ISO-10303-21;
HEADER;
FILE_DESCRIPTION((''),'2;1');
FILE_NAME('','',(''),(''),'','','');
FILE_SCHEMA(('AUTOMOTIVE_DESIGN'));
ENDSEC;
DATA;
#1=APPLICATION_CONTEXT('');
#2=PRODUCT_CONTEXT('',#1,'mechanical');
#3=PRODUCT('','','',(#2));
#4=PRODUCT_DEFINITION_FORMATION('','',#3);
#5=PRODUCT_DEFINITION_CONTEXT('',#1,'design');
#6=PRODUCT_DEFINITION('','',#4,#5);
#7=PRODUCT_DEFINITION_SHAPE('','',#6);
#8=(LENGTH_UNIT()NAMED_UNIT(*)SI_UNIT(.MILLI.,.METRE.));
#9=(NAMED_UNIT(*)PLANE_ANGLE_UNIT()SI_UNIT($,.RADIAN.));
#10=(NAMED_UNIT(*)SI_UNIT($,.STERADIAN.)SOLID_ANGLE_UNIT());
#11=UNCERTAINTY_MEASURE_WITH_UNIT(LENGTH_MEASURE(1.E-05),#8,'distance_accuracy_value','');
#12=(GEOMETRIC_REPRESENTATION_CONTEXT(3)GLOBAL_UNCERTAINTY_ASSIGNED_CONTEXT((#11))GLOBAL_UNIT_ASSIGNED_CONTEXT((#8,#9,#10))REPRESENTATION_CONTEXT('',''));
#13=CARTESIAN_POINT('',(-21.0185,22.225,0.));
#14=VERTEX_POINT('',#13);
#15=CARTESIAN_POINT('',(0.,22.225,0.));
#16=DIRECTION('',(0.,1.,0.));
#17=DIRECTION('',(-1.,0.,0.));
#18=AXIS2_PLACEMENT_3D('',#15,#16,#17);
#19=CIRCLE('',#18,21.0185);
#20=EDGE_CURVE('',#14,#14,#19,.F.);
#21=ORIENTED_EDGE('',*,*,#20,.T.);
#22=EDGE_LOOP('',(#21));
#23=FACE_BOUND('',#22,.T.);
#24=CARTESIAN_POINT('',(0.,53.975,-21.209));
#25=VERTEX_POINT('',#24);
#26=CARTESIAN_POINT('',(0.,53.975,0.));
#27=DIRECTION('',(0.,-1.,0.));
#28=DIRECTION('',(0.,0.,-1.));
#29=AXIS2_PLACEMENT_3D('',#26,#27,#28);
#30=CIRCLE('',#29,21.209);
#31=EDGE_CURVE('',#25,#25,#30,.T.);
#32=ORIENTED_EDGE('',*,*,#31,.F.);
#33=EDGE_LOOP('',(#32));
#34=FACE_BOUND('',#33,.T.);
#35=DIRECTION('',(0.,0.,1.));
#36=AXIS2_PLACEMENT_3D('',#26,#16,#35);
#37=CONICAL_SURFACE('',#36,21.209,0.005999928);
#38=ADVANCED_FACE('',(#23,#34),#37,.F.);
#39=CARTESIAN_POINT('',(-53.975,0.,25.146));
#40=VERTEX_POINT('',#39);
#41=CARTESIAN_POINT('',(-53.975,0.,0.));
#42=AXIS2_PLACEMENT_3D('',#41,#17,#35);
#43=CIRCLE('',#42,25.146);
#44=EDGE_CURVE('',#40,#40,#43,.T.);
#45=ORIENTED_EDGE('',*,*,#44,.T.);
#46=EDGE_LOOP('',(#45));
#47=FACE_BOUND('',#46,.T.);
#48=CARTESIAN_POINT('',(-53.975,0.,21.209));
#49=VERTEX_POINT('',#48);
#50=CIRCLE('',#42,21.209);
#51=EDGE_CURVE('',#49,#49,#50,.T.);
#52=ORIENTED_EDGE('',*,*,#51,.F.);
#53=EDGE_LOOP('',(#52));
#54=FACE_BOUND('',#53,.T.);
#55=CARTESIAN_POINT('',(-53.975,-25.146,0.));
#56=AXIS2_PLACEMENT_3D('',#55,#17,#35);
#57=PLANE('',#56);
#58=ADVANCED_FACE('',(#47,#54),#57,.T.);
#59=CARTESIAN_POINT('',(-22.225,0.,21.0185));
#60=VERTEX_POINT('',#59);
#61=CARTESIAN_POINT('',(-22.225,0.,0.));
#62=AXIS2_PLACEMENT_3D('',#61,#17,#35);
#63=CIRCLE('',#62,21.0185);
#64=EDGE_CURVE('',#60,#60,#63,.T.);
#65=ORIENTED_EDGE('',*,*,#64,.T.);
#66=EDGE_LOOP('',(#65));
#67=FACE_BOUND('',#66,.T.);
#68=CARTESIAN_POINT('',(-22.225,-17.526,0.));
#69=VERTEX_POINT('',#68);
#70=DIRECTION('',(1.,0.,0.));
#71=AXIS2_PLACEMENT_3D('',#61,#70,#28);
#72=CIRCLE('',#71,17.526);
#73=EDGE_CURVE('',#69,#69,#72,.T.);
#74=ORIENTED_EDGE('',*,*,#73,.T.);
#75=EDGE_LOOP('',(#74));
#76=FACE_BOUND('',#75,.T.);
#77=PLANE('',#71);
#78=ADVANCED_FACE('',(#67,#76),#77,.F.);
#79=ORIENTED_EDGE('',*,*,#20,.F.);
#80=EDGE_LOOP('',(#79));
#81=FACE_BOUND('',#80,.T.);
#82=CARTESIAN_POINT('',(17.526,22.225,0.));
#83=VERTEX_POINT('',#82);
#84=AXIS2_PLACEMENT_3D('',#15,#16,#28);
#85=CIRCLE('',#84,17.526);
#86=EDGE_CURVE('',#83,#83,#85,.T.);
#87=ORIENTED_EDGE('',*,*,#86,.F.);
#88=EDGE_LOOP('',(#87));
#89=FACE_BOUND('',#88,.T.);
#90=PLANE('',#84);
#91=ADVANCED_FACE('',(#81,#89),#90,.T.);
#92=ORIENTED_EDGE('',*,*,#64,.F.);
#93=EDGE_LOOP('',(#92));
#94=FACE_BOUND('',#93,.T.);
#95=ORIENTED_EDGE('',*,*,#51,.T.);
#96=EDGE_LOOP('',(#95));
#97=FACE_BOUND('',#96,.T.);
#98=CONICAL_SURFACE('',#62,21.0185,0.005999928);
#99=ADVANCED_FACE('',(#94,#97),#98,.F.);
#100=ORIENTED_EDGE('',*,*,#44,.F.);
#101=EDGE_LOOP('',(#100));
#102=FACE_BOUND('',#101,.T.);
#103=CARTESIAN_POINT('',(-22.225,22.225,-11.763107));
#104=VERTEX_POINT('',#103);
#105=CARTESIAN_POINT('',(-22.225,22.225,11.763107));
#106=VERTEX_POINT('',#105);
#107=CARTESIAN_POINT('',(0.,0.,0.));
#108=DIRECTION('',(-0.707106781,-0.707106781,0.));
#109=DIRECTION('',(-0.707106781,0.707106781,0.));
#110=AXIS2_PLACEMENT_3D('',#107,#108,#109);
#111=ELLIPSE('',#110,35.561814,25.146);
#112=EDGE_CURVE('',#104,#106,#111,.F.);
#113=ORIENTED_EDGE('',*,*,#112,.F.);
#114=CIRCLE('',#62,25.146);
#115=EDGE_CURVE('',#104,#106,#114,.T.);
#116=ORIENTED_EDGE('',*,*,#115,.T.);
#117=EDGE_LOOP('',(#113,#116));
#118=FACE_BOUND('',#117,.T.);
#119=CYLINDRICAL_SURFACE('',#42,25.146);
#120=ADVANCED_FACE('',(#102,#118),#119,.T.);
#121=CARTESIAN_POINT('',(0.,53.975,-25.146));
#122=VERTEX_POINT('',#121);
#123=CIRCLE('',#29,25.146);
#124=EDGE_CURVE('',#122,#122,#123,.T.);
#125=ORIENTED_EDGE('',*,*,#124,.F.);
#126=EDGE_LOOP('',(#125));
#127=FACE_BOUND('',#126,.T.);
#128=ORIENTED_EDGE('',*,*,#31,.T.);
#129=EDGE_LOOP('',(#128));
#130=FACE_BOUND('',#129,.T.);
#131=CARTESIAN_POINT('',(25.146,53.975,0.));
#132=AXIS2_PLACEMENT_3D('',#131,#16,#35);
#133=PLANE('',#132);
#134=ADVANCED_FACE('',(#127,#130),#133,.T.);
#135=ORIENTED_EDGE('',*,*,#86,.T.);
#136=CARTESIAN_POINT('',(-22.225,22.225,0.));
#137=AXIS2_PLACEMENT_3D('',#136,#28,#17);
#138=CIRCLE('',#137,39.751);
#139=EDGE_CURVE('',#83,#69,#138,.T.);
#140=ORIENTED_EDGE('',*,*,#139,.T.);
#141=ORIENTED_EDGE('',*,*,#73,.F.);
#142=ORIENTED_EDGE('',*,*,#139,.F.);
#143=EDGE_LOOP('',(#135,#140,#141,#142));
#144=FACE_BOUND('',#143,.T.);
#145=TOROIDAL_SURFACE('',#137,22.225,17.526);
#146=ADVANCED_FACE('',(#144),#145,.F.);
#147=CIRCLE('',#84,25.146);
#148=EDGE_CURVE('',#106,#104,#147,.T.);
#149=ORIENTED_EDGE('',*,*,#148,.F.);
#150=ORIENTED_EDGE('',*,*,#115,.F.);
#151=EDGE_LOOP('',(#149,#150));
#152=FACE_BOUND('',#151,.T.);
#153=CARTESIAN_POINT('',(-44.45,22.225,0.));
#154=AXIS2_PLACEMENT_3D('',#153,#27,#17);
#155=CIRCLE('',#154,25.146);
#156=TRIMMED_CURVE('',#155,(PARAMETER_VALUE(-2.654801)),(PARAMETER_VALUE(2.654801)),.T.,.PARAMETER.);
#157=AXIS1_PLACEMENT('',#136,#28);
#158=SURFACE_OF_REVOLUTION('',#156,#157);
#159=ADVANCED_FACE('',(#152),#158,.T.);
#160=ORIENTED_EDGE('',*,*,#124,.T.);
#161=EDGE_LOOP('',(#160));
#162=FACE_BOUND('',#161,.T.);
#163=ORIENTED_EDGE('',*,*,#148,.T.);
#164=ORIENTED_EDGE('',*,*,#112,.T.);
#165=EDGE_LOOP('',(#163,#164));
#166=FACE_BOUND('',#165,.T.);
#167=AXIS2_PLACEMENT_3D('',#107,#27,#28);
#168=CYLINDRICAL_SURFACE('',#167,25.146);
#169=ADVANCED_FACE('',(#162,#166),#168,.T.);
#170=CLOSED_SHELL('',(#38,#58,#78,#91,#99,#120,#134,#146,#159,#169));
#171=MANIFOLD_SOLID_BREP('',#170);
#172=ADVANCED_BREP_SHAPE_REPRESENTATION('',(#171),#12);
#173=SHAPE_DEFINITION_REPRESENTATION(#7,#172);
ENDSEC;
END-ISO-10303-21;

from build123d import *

# Parameters (mm, degrees)
SKETCH3_R   = 25.146
SKETCH3_R_2 = 17.526


with BuildPart() as part:
    # Sketch1 → Revolve1 (revolve)
    with BuildSketch(Plane.XY):
        Polygon((-53.975, -25.146), (-22.225, -25.146), (-22.225, -21.0185), (-53.975, -21.209), align=None)
    revolve(axis=Axis((-53.975, 0, 0), (1, 0, 0)))


with BuildPart() as body_2:
    # Sketch2 → Revolve2 (revolve)
    with BuildSketch(Plane.XY):
        Polygon((21.209, 53.975), (21.0185, 22.225), (25.146, 22.225), (25.146, 53.975), align=None)
    revolve(axis=Axis((0, 0, 0), (0, 1, 0)))


with BuildPart() as sweep1_tool:
    # Sweep1: sweep along a path in Sketch4
    with BuildLine(Plane.XY) as sweep1_path:
        ThreePointArc((-22.225, 0), (-6.509552, 6.509552), (0, 22.225))
    # Sketch3 → Sweep1 (sweep)
    with BuildSketch(Plane(origin=(-22.225, 0, 0), x_dir=(0, 0, -1), z_dir=(1, 0, 0))):
        Circle(SKETCH3_R)
        Circle(SKETCH3_R_2, mode=Mode.SUBTRACT)
    sweep(path=sweep1_path.line)


with BuildPart() as part_1:
    add(part.part)


with BuildPart() as part_2:
    # Sweep1: joined with sweep1_tool
    add(part_1.part.fuse(sweep1_tool.part, body_2.part, tol=0.00001))


solid = part_2.part
